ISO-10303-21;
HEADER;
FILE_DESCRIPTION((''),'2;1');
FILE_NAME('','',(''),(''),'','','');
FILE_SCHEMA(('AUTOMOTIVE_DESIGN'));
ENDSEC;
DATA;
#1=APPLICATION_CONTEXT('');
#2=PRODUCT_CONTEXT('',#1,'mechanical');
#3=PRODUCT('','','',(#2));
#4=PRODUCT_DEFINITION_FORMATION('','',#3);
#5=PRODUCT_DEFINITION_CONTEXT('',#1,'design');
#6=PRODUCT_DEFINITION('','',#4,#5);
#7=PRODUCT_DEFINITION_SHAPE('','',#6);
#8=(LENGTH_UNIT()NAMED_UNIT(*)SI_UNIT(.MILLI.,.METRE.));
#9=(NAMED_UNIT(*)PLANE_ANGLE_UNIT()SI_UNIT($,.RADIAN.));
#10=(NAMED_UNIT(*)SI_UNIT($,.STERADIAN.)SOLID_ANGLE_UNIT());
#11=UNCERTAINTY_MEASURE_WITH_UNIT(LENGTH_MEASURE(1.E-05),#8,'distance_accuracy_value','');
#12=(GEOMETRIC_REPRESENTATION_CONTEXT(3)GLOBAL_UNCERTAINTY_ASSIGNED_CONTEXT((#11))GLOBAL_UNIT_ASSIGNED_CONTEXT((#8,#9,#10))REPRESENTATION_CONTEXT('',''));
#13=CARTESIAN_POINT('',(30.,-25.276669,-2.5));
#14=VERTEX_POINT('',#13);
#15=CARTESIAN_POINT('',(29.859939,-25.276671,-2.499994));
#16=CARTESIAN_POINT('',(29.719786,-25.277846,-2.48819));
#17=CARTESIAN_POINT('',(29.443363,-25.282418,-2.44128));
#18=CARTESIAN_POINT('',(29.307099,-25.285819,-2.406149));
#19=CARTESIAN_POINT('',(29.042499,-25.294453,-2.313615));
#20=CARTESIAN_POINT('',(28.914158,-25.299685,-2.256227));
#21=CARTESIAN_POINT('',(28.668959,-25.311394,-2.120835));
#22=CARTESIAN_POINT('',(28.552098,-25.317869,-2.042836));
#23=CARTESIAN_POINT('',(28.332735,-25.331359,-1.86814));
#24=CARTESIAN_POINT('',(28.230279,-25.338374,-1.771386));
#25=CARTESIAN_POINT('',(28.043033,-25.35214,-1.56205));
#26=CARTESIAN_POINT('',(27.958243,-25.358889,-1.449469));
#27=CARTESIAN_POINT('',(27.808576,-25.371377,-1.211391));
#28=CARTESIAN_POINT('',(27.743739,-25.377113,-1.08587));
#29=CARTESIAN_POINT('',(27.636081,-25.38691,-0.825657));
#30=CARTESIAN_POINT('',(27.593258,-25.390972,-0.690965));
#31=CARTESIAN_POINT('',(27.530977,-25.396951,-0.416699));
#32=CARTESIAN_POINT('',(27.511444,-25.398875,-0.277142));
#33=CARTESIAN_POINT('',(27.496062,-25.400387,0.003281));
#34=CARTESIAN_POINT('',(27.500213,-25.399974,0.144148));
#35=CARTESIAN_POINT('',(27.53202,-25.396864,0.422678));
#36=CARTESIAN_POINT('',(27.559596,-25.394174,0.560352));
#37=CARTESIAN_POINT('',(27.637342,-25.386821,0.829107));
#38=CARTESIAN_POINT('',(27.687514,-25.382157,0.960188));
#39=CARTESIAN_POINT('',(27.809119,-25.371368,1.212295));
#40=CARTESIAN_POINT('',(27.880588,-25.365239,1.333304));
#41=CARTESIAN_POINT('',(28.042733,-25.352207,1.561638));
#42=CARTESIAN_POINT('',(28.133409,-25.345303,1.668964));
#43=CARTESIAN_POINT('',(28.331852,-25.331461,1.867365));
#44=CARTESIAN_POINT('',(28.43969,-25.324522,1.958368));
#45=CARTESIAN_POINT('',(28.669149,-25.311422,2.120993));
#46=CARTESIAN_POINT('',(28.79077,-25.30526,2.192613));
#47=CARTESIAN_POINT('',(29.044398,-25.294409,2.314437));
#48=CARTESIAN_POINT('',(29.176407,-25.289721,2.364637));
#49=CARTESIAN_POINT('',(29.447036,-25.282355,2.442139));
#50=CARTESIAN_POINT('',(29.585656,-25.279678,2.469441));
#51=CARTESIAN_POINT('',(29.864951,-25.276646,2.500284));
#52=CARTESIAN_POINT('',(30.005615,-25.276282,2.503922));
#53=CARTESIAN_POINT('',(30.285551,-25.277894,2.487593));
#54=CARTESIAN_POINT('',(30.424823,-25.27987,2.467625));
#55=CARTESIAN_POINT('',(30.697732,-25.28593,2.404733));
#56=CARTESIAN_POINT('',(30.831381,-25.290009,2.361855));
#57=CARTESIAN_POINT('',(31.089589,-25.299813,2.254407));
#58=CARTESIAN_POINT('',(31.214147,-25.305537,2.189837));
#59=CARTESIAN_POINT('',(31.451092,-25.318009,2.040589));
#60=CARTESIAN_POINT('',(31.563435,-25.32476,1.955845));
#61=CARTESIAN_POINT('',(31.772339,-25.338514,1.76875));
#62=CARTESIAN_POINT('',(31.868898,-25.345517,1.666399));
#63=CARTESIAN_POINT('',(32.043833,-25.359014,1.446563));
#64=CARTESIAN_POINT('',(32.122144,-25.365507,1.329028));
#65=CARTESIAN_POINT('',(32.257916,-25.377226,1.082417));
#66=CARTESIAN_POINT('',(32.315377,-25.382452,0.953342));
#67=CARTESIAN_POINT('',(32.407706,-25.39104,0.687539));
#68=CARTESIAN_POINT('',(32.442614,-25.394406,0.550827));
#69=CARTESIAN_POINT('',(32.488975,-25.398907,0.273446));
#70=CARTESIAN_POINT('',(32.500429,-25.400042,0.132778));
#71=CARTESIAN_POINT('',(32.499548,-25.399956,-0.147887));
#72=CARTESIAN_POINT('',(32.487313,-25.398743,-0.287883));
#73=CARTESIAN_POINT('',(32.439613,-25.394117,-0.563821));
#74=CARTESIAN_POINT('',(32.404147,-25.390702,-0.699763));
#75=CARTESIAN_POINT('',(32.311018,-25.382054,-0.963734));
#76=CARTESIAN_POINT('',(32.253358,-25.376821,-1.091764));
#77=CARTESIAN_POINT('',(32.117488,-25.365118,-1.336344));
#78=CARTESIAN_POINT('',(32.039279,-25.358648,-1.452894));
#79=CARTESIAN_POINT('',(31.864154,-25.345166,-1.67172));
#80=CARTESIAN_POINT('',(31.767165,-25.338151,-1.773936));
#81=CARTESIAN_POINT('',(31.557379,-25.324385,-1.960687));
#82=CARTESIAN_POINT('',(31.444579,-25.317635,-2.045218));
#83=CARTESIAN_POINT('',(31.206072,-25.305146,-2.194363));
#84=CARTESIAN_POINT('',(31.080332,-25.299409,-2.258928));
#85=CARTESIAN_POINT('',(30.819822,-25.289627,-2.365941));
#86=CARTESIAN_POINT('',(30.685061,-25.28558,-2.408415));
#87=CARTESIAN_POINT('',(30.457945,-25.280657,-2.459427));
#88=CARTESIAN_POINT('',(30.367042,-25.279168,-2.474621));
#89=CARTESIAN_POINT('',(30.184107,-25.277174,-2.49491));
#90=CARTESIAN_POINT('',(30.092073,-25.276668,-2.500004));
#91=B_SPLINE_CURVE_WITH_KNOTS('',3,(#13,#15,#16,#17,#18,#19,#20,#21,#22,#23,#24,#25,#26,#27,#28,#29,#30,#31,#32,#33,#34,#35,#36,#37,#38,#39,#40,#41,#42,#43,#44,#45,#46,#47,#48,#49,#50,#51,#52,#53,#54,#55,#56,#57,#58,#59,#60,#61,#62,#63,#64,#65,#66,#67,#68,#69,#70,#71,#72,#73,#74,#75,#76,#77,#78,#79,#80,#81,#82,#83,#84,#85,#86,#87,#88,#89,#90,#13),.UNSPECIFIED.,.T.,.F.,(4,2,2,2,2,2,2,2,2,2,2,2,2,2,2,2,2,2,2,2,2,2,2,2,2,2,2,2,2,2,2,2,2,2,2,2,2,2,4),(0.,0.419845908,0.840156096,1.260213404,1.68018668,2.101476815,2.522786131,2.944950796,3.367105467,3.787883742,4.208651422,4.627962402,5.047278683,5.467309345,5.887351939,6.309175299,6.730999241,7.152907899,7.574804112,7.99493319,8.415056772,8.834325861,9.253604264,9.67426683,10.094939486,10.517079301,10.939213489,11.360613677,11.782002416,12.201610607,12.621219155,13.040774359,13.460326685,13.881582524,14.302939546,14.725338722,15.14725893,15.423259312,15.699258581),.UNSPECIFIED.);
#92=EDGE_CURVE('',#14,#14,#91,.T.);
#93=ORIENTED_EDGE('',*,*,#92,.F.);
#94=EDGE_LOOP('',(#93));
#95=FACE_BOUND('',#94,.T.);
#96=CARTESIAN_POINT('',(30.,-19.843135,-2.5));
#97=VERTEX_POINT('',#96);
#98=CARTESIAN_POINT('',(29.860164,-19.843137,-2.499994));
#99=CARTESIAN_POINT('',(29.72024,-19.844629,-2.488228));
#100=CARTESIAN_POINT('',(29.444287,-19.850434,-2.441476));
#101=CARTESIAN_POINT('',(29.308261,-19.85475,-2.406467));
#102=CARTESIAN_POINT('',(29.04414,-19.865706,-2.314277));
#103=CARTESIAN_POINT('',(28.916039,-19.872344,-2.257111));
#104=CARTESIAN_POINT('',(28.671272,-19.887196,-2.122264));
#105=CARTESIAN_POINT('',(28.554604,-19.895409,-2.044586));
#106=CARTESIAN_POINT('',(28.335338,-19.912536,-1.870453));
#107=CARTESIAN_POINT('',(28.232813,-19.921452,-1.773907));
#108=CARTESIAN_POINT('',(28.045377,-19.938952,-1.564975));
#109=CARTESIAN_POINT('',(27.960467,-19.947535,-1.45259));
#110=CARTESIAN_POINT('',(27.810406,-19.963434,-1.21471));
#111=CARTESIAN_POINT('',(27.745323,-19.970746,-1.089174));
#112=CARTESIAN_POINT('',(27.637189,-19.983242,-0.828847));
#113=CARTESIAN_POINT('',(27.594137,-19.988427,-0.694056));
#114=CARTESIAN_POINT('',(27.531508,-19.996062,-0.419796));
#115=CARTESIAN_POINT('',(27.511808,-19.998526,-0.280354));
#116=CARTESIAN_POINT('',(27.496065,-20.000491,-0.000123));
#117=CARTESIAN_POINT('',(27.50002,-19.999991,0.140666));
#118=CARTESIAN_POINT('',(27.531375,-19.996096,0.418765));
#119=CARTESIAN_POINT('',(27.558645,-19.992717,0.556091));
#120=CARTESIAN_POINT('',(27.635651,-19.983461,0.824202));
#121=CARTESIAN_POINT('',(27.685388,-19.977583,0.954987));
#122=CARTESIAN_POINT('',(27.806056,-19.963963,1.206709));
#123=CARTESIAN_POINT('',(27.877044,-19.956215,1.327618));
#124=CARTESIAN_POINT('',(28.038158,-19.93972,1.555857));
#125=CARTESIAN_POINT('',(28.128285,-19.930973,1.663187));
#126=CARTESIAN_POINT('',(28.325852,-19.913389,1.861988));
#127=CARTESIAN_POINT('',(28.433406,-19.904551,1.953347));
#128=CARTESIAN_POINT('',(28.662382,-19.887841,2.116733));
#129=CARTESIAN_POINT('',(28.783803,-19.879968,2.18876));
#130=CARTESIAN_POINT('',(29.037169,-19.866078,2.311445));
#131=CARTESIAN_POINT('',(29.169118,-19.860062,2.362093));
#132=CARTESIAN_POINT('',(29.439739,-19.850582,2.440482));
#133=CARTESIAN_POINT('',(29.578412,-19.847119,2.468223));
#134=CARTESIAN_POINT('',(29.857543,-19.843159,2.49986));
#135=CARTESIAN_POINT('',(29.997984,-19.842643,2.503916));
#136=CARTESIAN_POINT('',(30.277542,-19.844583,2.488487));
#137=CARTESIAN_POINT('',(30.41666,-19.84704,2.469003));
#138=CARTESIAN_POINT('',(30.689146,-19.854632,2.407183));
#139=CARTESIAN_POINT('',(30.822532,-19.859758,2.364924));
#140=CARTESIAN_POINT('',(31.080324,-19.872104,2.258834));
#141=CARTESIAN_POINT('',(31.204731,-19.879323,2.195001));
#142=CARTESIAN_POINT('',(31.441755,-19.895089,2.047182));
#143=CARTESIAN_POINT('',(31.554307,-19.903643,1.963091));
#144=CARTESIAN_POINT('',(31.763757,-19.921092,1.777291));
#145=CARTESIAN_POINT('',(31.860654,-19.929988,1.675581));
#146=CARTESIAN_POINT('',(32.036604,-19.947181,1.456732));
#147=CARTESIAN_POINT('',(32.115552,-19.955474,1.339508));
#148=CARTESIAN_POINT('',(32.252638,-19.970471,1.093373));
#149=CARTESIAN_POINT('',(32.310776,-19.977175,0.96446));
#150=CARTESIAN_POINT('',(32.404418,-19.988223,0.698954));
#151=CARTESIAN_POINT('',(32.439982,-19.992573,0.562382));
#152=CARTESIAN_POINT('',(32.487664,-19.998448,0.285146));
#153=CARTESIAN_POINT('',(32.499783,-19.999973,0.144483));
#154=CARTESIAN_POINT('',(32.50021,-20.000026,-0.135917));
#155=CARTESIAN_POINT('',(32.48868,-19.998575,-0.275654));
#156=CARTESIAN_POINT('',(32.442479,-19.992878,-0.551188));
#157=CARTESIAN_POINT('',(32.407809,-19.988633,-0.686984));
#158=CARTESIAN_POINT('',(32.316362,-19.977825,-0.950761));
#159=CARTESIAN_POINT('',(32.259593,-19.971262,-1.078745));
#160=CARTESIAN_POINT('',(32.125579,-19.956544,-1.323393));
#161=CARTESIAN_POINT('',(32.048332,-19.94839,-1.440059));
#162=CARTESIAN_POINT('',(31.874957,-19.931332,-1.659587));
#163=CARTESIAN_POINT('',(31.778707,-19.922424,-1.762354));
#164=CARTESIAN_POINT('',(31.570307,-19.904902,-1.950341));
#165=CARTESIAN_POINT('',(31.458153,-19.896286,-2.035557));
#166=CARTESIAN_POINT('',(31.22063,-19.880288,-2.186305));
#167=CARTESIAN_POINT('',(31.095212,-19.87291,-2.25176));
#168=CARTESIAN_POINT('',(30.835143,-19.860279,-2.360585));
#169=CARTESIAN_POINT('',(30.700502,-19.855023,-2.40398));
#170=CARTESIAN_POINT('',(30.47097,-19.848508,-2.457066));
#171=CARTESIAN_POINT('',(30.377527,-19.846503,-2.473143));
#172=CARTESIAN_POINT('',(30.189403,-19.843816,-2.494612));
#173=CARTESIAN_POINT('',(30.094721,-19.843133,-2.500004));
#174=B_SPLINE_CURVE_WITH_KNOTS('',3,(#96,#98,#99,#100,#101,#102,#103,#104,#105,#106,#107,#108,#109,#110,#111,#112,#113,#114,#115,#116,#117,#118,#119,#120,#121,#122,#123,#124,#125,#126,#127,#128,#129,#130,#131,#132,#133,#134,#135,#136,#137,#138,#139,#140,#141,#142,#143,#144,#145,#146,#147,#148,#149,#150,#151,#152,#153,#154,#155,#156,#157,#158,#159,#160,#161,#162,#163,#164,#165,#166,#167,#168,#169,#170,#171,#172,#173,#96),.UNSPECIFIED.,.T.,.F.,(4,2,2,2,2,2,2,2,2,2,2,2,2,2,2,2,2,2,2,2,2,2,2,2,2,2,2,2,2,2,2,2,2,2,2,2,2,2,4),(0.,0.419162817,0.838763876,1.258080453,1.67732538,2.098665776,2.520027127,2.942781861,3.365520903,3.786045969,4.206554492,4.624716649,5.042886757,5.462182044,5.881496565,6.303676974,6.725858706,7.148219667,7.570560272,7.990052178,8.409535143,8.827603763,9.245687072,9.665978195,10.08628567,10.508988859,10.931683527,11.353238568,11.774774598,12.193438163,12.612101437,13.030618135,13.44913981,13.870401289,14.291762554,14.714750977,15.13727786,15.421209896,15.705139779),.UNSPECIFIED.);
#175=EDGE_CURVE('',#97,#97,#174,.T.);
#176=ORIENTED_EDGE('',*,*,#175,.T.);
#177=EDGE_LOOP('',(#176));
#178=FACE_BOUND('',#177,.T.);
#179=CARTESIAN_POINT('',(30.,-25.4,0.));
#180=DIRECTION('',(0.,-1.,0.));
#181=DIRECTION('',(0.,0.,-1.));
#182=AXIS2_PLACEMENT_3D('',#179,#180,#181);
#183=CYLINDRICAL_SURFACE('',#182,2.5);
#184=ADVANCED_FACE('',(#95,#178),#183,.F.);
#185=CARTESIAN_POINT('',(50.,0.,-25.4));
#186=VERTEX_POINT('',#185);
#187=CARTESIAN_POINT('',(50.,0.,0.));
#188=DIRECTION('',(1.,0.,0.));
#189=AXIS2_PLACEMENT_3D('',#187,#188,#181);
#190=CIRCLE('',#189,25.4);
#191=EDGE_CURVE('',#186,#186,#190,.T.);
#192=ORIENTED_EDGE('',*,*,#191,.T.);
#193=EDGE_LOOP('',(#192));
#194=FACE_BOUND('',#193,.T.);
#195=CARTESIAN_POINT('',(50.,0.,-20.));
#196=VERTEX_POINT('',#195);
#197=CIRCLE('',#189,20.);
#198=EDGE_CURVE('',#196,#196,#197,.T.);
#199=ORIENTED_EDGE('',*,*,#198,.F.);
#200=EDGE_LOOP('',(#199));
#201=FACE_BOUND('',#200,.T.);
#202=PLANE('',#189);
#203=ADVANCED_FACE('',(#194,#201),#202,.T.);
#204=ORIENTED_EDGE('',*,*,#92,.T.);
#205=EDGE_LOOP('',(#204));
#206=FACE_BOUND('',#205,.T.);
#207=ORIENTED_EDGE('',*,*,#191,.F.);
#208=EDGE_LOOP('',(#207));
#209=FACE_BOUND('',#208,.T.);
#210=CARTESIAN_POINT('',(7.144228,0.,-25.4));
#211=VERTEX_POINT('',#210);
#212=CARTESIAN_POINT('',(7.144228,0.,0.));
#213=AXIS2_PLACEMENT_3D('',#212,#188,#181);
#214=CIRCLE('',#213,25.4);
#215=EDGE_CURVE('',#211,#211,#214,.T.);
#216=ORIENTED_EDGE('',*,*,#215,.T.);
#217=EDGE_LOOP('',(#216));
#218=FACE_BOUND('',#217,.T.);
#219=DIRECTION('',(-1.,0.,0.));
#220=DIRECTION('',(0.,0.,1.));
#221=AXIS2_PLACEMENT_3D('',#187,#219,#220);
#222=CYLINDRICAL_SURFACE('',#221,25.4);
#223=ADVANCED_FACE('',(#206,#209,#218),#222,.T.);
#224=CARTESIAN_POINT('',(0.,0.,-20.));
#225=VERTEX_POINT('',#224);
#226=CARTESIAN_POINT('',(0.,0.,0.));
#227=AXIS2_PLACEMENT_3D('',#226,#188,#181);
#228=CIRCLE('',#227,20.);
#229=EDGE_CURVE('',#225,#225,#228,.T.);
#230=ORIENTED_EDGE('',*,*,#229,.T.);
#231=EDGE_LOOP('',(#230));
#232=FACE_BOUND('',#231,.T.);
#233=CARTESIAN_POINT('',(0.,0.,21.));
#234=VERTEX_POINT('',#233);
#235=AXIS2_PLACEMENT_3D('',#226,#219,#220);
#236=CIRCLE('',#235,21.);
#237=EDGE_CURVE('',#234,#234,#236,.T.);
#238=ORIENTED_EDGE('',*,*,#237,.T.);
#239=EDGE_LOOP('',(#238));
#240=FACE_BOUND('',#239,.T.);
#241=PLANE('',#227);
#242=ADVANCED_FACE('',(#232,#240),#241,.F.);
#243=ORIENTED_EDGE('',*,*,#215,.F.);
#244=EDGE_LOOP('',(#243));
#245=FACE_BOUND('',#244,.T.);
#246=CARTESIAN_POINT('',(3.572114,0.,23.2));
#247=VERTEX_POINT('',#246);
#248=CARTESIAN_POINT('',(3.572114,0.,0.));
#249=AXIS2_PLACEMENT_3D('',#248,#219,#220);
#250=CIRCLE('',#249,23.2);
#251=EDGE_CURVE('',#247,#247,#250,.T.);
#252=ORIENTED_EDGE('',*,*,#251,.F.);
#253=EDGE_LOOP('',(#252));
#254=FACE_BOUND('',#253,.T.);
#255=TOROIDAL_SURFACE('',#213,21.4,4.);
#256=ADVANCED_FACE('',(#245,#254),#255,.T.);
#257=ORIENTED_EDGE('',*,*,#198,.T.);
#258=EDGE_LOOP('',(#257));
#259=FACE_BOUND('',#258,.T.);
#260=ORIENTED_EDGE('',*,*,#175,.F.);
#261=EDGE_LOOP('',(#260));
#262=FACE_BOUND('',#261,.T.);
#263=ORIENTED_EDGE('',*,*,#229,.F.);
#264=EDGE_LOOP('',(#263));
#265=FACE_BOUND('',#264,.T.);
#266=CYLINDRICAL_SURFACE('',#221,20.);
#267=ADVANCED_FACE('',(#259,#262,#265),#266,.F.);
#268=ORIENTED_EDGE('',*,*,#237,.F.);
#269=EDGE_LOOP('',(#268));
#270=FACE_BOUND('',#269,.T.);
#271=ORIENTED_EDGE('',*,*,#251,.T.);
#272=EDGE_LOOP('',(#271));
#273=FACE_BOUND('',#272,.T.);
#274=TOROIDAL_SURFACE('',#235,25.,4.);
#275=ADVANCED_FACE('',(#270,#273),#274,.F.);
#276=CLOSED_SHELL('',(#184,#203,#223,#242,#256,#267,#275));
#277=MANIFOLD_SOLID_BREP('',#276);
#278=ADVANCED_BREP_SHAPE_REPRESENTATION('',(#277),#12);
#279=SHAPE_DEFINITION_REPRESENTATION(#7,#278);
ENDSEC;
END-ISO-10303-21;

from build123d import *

# Parameters (mm, degrees)
SKETCH1_R                 = 25.4
SKETCH1_R_2               = 20
BOSS_EXTRUDE1_DEPTH       = 50
SKETCH2_R                 = 30
SKETCH2_R_2               = 21
CUT_EXTRUDE1_DEPTH        = 4
FILLET1_R                 = 4
FILLET2_R                 = 4
M6X1_0_TAPPED_HOLE1_D     = 5
M6X1_0_TAPPED_HOLE1_DEPTH = 13.497848452
M6X1_0_TAPPED_HOLE1_TIP   = 1.502151548


# Some blends are built 0.0001 mm under size
with BuildPart() as part:
    # Sketch1 → Boss-Extrude1 (new body)
    with BuildSketch(Plane(origin=(0, 0, 0), x_dir=(0, 0, -1), z_dir=(1, 0, 0))):
        Circle(SKETCH1_R)
        Circle(SKETCH1_R_2, mode=Mode.SUBTRACT)
    extrude(amount=BOSS_EXTRUDE1_DEPTH)

    # Sketch2 → Cut-Extrude1 (cut)
    with BuildSketch(Plane.ZY):
        Circle(SKETCH2_R)
        Circle(SKETCH2_R_2, mode=Mode.SUBTRACT)
    extrude(amount=-CUT_EXTRUDE1_DEPTH, mode=Mode.SUBTRACT)

    # Fillet1
    fillet1_edges = [part.edges().sort_by_distance(p)[0] for p in [
        (4, 0, -21),
    ]]
    fillet(fillet1_edges, radius=FILLET1_R - 0.0001)  # a hair under: the kernel refuses the full size

    # Fillet2
    # the kernel refuses this fillet: 4 mm, written as the material it takes off along each edge
    with BuildSketch(Plane(origin=(4, 0, 0), x_dir=(0, 0, -1), z_dir=(0, 1, 0))) as fillet2_piece_1:
        with BuildLine():
            CenterArc((21.4, -3.144266851), FILLET2_R, 0, 63.256757147)
            Line((25.4, -3.144266851), (25.8, -3.144266851))
            Line((25.8, -3.144266851), (25.8, 0))
            Line((25.8, 0), (25.4, 0.4))
            ThreePointArc((25.4, 0.4), (24.9999, 0.4), (23.37996975, 0.785074034))
            Line((23.37996975, 0.785074034), (23.1999725, 0.427861226))
        make_face()
    revolve(axis=Axis((4, 0, 0), (-1, 0, 0)), mode=Mode.SUBTRACT)

    # M6x1.0 Tapped Hole1
    with Locations(Plane(origin=(0, -25.4, 0), x_dir=(-1, 0, 0), z_dir=(0, -1, 0))):
        with Locations((-30, 0)):
            Hole(M6X1_0_TAPPED_HOLE1_D / 2, depth=M6X1_0_TAPPED_HOLE1_DEPTH)
            with Locations((0, 0, -(M6X1_0_TAPPED_HOLE1_DEPTH + M6X1_0_TAPPED_HOLE1_TIP / 2))):  # 118° drill point
                Cone(0, M6X1_0_TAPPED_HOLE1_D / 2, M6X1_0_TAPPED_HOLE1_TIP, mode=Mode.SUBTRACT)


solid = part.part
